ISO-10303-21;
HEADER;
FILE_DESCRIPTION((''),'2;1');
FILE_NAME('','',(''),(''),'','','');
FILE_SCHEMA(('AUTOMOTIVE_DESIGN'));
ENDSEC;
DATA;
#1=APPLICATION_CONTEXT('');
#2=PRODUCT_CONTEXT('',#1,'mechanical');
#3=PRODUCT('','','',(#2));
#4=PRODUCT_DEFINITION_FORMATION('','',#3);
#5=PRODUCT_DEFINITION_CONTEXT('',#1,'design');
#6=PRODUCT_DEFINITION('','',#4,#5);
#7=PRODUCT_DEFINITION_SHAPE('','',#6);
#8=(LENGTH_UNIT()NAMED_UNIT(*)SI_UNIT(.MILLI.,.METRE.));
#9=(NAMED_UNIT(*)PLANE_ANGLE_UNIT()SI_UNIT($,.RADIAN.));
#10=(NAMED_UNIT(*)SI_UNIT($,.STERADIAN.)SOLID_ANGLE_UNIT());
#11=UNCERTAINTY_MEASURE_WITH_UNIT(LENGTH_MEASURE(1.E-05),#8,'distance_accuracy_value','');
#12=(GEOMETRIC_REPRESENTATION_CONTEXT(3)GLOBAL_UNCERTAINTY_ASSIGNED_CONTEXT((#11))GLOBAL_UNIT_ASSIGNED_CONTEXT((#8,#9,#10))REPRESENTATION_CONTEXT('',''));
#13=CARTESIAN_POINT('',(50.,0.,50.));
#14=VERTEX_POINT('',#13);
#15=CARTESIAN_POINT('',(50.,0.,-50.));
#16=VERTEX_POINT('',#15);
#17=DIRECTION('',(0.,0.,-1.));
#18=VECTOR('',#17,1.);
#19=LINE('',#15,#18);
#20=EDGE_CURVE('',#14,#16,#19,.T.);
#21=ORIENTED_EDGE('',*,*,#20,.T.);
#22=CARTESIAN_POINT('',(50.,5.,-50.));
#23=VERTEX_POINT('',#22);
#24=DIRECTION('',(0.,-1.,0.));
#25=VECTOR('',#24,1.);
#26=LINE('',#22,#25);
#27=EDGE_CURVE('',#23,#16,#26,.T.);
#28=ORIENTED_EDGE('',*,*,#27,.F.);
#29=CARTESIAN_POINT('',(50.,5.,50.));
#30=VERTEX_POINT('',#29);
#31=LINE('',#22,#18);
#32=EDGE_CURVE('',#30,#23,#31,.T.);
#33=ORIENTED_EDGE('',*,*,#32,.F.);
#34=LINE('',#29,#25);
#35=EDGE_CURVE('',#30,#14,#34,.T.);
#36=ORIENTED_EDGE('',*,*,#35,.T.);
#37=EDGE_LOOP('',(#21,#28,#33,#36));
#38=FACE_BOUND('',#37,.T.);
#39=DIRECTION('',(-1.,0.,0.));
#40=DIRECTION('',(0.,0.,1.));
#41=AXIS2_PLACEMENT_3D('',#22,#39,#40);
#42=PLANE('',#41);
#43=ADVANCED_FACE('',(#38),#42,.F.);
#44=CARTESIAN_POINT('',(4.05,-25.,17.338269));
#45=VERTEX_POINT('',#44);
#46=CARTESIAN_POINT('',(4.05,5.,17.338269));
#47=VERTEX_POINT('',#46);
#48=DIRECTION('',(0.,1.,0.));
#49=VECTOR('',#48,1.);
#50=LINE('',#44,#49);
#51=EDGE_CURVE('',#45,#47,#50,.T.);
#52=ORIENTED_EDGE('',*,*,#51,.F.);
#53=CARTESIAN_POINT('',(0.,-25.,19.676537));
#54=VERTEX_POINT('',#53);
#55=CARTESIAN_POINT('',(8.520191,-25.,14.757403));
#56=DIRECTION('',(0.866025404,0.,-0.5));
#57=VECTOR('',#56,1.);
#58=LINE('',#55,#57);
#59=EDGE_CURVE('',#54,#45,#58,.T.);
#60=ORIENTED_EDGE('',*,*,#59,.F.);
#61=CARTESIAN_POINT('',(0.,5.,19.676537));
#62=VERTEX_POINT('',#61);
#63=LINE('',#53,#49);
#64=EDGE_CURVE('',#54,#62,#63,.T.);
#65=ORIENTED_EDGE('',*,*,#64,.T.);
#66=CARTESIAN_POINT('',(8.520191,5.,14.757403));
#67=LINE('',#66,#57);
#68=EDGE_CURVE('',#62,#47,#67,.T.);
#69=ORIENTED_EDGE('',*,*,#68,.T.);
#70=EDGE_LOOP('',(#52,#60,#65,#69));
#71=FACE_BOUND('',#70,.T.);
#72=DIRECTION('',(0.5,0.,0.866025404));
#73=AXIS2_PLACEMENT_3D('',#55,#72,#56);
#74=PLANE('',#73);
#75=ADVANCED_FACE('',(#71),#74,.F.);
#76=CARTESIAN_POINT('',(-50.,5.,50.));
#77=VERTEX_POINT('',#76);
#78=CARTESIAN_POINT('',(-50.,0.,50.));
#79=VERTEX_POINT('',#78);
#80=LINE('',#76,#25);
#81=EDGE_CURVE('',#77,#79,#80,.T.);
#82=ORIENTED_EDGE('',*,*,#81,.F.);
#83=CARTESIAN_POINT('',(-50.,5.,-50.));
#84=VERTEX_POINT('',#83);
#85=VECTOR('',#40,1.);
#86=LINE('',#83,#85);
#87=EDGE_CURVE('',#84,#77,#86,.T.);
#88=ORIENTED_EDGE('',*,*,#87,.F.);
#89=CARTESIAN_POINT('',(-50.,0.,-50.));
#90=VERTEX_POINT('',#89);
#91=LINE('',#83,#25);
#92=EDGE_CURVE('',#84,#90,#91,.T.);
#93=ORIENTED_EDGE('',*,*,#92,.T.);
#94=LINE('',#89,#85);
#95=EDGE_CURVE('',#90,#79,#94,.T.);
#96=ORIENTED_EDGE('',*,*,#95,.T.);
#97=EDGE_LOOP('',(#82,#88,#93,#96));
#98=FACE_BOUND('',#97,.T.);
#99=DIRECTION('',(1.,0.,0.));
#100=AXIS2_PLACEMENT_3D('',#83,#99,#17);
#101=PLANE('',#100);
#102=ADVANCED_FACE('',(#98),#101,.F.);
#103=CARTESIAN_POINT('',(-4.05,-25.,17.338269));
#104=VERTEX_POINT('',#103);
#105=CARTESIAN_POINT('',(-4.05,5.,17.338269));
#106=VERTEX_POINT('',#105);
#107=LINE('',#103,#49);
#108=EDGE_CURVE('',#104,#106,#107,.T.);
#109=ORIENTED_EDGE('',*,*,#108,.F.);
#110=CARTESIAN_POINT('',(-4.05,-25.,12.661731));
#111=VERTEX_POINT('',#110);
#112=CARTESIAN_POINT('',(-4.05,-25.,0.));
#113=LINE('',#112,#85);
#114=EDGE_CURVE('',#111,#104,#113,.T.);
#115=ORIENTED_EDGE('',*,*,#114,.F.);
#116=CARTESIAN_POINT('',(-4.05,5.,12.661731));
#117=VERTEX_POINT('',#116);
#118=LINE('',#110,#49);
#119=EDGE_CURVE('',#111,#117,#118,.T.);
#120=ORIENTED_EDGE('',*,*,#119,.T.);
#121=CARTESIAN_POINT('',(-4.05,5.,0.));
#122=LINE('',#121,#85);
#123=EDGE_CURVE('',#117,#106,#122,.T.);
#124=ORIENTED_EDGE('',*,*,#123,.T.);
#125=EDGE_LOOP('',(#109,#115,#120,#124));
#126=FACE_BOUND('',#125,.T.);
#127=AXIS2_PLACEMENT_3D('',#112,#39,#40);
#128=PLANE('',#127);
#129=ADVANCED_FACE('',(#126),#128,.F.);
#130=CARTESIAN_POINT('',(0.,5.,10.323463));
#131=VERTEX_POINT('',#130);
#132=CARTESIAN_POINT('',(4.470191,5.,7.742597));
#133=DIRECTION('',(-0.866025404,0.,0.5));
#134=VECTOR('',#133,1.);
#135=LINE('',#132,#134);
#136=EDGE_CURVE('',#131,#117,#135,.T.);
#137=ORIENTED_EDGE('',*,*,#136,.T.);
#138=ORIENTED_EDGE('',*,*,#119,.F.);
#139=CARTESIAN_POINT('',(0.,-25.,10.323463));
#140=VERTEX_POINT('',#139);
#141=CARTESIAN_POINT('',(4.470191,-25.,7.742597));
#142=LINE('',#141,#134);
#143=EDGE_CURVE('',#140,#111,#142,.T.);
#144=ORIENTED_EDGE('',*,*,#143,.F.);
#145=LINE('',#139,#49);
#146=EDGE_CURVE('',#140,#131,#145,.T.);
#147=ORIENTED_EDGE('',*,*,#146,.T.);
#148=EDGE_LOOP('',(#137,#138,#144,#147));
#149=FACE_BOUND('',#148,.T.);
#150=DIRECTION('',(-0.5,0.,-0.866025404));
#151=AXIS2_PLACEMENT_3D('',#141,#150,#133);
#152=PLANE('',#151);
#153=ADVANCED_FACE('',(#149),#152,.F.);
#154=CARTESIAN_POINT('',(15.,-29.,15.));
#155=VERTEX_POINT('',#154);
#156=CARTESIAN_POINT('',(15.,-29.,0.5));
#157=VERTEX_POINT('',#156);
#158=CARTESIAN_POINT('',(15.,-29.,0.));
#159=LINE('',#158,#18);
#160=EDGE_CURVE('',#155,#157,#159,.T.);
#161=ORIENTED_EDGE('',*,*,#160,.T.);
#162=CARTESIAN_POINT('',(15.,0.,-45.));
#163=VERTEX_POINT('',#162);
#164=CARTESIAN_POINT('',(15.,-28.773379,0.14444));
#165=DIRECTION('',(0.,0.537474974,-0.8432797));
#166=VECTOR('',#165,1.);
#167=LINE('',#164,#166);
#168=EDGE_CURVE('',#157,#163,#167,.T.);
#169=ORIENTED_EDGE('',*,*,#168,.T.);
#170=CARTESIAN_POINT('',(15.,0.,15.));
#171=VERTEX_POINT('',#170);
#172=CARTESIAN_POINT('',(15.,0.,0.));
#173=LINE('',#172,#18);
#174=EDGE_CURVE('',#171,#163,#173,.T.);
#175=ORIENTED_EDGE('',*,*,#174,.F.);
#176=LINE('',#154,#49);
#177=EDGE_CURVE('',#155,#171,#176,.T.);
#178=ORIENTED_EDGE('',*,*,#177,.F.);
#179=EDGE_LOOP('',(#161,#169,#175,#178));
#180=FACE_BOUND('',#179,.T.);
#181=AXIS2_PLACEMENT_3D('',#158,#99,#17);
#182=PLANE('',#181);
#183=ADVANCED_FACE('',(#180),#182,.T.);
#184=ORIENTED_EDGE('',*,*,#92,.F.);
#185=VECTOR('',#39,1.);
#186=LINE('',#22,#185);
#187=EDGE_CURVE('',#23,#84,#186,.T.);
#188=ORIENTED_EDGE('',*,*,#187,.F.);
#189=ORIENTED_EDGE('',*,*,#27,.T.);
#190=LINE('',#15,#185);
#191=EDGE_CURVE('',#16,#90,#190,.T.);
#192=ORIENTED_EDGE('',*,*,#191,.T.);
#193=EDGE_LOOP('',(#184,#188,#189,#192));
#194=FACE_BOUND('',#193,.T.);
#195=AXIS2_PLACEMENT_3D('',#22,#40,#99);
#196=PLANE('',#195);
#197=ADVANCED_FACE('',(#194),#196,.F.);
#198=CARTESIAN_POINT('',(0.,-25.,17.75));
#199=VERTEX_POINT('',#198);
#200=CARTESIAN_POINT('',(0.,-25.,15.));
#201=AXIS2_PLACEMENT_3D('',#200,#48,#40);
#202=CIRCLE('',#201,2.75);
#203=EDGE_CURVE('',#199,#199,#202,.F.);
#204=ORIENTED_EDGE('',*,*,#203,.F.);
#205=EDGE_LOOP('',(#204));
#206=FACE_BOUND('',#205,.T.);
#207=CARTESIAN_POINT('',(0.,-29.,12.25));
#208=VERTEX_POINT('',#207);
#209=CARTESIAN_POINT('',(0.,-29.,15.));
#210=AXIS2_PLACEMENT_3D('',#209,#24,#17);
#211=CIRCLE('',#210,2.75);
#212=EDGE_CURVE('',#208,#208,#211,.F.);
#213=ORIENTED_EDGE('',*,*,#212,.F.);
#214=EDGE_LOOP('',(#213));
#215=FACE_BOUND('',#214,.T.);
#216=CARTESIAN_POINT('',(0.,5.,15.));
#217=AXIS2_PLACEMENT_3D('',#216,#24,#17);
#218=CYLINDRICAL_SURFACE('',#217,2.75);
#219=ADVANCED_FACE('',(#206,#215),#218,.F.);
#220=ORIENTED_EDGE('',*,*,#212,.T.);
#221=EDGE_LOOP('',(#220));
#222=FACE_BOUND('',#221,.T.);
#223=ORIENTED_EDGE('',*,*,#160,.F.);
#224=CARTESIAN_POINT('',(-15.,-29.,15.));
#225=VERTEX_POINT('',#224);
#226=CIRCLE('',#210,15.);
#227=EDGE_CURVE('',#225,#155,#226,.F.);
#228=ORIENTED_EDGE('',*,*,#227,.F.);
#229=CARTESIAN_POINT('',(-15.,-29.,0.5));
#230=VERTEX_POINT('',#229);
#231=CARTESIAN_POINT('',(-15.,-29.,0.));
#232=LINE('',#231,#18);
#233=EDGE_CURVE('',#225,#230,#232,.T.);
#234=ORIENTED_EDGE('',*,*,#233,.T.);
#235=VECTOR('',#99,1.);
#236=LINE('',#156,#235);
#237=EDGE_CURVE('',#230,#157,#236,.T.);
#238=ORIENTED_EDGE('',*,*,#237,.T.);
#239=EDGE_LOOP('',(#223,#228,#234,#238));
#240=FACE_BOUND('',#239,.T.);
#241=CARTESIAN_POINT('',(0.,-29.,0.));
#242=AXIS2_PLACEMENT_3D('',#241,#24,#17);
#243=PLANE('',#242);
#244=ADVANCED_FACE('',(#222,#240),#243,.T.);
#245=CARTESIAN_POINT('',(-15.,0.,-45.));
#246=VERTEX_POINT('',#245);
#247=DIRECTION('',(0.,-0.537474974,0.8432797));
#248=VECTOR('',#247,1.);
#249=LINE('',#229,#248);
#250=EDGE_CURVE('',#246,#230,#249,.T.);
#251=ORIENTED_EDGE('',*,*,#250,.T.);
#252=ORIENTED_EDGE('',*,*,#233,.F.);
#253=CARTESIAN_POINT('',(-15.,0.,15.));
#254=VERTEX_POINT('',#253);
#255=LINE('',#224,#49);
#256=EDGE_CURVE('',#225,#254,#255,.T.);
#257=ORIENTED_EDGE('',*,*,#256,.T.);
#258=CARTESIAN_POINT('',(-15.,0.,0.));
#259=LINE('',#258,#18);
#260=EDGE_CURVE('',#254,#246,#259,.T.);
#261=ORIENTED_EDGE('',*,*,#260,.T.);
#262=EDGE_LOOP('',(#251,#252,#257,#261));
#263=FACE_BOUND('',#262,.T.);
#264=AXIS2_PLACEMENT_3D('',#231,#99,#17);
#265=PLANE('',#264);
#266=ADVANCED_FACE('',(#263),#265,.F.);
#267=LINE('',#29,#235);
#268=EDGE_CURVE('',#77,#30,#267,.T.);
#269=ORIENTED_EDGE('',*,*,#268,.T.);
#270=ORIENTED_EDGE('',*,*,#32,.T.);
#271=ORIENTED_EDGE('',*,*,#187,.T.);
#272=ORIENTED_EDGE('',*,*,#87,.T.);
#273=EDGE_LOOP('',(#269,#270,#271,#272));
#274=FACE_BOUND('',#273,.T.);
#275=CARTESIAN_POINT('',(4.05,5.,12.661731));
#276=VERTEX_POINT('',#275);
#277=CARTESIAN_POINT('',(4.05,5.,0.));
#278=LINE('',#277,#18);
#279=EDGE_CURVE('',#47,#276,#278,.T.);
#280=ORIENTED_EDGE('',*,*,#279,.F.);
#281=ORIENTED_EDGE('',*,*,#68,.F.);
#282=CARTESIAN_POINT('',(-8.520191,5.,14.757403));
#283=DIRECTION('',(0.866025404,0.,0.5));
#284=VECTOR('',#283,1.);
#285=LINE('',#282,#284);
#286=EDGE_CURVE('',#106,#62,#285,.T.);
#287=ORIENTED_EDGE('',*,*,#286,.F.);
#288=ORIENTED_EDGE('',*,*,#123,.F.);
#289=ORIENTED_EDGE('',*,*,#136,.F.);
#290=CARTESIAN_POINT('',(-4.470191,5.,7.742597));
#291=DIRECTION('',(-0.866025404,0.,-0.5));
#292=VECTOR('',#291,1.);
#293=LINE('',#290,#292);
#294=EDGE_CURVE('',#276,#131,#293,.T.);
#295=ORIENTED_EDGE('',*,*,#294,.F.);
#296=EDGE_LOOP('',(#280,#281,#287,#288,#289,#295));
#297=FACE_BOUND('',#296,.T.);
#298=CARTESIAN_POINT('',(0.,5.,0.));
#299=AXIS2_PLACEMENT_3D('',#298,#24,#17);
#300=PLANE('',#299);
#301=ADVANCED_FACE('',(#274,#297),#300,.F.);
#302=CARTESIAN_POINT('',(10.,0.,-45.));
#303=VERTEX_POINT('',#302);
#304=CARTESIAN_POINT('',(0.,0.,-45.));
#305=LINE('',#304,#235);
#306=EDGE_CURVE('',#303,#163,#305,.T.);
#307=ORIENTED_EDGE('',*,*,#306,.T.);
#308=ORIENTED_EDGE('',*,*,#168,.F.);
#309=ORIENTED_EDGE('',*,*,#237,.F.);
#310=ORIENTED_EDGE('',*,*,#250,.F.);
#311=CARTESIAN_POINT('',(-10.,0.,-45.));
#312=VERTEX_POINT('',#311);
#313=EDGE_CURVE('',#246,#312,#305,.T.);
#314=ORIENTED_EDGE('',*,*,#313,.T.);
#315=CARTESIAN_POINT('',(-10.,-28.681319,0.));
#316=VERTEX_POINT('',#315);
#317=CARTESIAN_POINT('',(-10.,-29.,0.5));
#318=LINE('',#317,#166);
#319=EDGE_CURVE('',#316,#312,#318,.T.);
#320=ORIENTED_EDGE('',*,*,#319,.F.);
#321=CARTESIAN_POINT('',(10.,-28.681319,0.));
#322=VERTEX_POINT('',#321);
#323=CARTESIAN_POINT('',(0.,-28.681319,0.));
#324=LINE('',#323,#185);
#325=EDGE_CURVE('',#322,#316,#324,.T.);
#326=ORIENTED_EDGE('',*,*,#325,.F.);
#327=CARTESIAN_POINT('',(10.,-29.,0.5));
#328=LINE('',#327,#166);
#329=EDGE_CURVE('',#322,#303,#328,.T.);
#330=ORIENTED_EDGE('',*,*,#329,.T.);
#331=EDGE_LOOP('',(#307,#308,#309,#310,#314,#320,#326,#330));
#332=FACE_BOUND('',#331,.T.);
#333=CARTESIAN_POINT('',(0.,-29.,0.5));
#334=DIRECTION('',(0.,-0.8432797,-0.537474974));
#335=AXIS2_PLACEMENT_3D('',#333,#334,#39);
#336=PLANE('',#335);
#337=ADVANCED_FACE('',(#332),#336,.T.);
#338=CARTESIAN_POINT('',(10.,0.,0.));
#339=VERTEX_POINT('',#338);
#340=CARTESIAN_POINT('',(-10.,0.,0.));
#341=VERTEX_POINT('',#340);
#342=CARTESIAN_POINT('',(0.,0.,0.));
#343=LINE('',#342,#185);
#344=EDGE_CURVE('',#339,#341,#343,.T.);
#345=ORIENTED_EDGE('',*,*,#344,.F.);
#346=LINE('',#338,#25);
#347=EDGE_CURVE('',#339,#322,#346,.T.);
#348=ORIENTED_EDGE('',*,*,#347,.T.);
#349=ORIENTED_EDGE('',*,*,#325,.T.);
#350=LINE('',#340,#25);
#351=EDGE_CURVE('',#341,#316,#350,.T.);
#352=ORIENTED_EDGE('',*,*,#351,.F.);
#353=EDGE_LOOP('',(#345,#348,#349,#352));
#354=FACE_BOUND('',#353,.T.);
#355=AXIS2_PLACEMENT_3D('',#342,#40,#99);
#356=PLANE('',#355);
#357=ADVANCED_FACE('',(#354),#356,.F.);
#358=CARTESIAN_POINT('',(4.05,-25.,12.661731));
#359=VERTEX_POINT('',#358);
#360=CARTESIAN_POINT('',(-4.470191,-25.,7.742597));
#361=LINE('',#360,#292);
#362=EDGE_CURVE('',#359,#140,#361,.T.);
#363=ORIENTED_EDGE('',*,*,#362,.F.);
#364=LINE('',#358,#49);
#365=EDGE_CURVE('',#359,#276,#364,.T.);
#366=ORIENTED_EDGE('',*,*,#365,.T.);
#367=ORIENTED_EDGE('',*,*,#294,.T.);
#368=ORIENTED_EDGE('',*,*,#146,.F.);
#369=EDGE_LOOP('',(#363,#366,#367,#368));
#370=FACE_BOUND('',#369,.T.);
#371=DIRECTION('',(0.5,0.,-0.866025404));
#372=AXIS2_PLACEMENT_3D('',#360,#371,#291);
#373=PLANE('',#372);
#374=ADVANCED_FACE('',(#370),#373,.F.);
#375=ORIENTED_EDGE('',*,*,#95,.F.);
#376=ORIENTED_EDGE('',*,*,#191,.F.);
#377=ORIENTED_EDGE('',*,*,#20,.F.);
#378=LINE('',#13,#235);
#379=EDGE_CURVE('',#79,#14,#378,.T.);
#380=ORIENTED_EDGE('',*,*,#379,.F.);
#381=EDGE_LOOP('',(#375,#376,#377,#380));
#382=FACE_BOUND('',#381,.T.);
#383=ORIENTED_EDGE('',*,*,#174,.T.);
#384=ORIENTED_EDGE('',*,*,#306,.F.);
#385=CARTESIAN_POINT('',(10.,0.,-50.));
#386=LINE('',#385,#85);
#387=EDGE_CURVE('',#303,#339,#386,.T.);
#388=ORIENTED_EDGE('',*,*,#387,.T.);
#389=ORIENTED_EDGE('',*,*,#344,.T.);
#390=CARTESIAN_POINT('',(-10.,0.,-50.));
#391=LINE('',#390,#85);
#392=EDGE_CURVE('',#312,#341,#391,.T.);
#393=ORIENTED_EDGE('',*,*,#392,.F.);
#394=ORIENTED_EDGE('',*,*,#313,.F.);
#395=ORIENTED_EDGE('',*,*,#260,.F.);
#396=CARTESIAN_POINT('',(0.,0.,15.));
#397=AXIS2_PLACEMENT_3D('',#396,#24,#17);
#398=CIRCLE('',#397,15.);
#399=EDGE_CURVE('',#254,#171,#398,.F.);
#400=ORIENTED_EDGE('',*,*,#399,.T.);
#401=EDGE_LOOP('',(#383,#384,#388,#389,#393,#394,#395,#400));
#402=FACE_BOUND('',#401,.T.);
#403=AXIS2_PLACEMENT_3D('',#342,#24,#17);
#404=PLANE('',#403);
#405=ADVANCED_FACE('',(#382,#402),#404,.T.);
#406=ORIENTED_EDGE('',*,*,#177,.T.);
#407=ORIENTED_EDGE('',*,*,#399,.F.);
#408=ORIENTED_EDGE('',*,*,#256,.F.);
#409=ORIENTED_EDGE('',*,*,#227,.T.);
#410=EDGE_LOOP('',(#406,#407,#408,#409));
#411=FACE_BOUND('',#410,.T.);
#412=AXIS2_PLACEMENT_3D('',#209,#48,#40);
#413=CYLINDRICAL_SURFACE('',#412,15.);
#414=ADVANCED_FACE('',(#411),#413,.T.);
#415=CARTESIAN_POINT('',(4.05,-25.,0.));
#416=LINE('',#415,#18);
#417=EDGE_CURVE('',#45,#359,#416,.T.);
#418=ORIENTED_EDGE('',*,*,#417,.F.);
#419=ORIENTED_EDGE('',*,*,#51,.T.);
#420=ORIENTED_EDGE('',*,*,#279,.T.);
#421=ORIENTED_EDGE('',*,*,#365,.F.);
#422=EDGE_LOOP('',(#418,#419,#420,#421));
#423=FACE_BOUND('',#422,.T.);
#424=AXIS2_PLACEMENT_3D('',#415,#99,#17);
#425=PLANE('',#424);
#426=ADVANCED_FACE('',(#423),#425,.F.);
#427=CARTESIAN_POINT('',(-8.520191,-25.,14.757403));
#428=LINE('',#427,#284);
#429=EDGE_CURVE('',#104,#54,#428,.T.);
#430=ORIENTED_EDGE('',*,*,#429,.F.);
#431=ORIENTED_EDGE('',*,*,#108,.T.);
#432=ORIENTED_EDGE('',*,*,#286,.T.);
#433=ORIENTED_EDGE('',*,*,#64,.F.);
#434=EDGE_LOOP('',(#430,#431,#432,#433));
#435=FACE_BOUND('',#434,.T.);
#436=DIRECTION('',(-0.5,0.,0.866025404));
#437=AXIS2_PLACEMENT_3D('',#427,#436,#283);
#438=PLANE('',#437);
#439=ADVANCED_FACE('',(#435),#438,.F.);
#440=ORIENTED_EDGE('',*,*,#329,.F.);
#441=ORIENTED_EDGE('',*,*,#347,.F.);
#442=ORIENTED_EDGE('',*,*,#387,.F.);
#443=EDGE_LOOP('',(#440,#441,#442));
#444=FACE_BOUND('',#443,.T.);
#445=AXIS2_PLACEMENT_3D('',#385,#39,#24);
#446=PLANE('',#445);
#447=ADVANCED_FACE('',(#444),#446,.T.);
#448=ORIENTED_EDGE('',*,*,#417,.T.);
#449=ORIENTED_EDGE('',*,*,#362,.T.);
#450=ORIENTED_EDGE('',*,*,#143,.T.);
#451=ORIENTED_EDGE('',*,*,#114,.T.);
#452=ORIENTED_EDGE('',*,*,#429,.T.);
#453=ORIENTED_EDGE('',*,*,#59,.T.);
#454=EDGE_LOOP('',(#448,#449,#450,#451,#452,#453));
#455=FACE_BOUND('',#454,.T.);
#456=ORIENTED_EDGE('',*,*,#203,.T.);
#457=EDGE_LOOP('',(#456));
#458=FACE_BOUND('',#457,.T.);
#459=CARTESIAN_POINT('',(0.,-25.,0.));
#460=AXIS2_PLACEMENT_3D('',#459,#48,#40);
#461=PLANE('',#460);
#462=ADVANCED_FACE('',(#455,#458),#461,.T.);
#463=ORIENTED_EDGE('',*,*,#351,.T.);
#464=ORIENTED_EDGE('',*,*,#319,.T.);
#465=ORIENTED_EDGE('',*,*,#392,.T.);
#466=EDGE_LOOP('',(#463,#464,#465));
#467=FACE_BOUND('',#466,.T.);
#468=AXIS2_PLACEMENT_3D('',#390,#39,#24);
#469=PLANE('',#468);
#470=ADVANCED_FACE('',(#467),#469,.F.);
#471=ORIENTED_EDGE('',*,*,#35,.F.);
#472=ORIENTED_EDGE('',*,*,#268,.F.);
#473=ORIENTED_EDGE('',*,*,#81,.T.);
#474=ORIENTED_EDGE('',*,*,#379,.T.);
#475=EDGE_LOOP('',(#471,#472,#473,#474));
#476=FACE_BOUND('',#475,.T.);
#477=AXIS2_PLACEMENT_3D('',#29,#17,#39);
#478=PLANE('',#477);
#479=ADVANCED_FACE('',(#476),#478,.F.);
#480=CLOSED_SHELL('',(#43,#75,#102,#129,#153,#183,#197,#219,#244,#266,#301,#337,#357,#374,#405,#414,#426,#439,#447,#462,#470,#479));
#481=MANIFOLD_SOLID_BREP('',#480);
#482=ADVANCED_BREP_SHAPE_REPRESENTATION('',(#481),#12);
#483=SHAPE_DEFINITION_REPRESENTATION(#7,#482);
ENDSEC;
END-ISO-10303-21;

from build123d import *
from build123d.topology import SkipClean

# Parameters (mm, degrees)
ESQUISSE1_W             = 100
ESQUISSE1_H             = 100
ESQUISSE1_R             = 2.75
BOSS_EXTRU_1_DEPTH      = 5
BOSS_EXTRU_2_START      = 29
ESQUISSE2_R             = 2.75
BOSS_EXTRU_2_DEPTH      = 29
ESQUISSE3_W             = 30
ESQUISSE3_H             = 43.5
BOSS_EXTRU_3_DEPTH      = 29
CHANFREIN1_SIZE         = 29
CHANFREIN1_SIZE_2       = 45.5
ENL_V_START             = -30
ESQUISSE4_R             = 2.75
ENL_V_MAT_EXTRU_1_DEPTH = 30
ESQUISSE7_W             = 10
ESQUISSE7_H             = 29
ENL_V_MAT_EXTRU_2_DEPTH = 77.426435217


with BuildPart() as part:
    # Esquisse1 → Boss.-Extru.1 (new body)
    with BuildSketch(Plane(origin=(0, 0, 0), x_dir=(1, 0, 0), z_dir=(0, 1, 0))):
        Rectangle(ESQUISSE1_W, ESQUISSE1_H)
        with Locations(Location((0, -15, 0), (0, 0, 270))):
            Circle(ESQUISSE1_R, mode=Mode.SUBTRACT)
    extrude(amount=BOSS_EXTRU_1_DEPTH)

    # Esquisse2 → Boss.-Extru.2 (add)
    with SkipClean():  # the faces are left unmerged after this step: merging them gives an invalid solid
        with BuildSketch(Plane.XZ.offset(BOSS_EXTRU_2_START)):
            with BuildLine():
                ThreePointArc((-15, 15), (0, 30), (15, 15))
                Line((15, 15), (15, -1.5))
                Line((15, -1.5), (-15, -1.5))
                Line((-15, -1.5), (-15, 15))
            make_face()
            with Locations(Location((0, 15, 0), (0, 0, 270))):
                Circle(ESQUISSE2_R, mode=Mode.SUBTRACT)
        extrude(amount=-BOSS_EXTRU_2_DEPTH)

    # Esquisse3 → Boss.-Extru.3 (add)
    with SkipClean():  # the faces are left unmerged after this step: merging them gives an invalid solid
        with BuildSketch(Plane.XZ):
            with Locations((0, -23.25)):
                Rectangle(ESQUISSE3_W, ESQUISSE3_H)
        extrude(amount=BOSS_EXTRU_3_DEPTH)

    # Chanfrein1
    # the kernel refuses this chamfer: 45.5, 29 mm, written as the material it takes off along each edge
    with BuildSketch(Plane(origin=(-132.612350115, -29, -45), x_dir=(0, 0.9986920470194074, -0.051129201247289646), z_dir=(1, 0, 0))) as chanfrein1_piece_1_section:
        Polygon((CHANFREIN1_SIZE * 0.998692047019, CHANFREIN1_SIZE * 0.0511292012473), (-CHANFREIN1_SIZE_2 * 0.0511292012473, CHANFREIN1_SIZE_2 * 0.998692047019), (0, 0), align=None)
    chanfrein1_piece_1 = extrude(amount=265.22470023, mode=Mode.PRIVATE)
    chanfrein1_piece_1 = split(chanfrein1_piece_1, bisect_by=Plane(origin=(0, 0, -29.75832693), z_dir=(0, -1, 0)), keep=Keep.TOP, mode=Mode.PRIVATE)
    add(chanfrein1_piece_1, mode=Mode.SUBTRACT)

    # Esquisse4 → Enlèv. mat.-Extru.1 (cut)
    with BuildSketch(Plane(origin=(0, 5, 0), x_dir=(1, 0, 0), z_dir=(0, 1, 0)).offset(ENL_V_START)):
        Polygon((4.05, -17.33826859), (4.05, -12.66173141), (0, -10.32346282), (-4.05, -12.66173141), (-4.05, -17.33826859), (0, -19.67653718), align=None)
        with Locations(Location((0, -15, 0), (0, 0, 90))):
            Circle(ESQUISSE4_R, mode=Mode.SUBTRACT)
    extrude(amount=ENL_V_MAT_EXTRU_1_DEPTH, mode=Mode.SUBTRACT)

    # Esquisse7 → Enlèv. mat.-Extru.2 (cut, through all)
    with BuildSketch(Plane.XY):
        with Locations((-5, -14.5)):
            Rectangle(ESQUISSE7_W, ESQUISSE7_H)
        with Locations((5, -14.5)):
            Rectangle(ESQUISSE7_W, ESQUISSE7_H)
    extrude(amount=-ENL_V_MAT_EXTRU_2_DEPTH, mode=Mode.SUBTRACT)


solid = part.part
